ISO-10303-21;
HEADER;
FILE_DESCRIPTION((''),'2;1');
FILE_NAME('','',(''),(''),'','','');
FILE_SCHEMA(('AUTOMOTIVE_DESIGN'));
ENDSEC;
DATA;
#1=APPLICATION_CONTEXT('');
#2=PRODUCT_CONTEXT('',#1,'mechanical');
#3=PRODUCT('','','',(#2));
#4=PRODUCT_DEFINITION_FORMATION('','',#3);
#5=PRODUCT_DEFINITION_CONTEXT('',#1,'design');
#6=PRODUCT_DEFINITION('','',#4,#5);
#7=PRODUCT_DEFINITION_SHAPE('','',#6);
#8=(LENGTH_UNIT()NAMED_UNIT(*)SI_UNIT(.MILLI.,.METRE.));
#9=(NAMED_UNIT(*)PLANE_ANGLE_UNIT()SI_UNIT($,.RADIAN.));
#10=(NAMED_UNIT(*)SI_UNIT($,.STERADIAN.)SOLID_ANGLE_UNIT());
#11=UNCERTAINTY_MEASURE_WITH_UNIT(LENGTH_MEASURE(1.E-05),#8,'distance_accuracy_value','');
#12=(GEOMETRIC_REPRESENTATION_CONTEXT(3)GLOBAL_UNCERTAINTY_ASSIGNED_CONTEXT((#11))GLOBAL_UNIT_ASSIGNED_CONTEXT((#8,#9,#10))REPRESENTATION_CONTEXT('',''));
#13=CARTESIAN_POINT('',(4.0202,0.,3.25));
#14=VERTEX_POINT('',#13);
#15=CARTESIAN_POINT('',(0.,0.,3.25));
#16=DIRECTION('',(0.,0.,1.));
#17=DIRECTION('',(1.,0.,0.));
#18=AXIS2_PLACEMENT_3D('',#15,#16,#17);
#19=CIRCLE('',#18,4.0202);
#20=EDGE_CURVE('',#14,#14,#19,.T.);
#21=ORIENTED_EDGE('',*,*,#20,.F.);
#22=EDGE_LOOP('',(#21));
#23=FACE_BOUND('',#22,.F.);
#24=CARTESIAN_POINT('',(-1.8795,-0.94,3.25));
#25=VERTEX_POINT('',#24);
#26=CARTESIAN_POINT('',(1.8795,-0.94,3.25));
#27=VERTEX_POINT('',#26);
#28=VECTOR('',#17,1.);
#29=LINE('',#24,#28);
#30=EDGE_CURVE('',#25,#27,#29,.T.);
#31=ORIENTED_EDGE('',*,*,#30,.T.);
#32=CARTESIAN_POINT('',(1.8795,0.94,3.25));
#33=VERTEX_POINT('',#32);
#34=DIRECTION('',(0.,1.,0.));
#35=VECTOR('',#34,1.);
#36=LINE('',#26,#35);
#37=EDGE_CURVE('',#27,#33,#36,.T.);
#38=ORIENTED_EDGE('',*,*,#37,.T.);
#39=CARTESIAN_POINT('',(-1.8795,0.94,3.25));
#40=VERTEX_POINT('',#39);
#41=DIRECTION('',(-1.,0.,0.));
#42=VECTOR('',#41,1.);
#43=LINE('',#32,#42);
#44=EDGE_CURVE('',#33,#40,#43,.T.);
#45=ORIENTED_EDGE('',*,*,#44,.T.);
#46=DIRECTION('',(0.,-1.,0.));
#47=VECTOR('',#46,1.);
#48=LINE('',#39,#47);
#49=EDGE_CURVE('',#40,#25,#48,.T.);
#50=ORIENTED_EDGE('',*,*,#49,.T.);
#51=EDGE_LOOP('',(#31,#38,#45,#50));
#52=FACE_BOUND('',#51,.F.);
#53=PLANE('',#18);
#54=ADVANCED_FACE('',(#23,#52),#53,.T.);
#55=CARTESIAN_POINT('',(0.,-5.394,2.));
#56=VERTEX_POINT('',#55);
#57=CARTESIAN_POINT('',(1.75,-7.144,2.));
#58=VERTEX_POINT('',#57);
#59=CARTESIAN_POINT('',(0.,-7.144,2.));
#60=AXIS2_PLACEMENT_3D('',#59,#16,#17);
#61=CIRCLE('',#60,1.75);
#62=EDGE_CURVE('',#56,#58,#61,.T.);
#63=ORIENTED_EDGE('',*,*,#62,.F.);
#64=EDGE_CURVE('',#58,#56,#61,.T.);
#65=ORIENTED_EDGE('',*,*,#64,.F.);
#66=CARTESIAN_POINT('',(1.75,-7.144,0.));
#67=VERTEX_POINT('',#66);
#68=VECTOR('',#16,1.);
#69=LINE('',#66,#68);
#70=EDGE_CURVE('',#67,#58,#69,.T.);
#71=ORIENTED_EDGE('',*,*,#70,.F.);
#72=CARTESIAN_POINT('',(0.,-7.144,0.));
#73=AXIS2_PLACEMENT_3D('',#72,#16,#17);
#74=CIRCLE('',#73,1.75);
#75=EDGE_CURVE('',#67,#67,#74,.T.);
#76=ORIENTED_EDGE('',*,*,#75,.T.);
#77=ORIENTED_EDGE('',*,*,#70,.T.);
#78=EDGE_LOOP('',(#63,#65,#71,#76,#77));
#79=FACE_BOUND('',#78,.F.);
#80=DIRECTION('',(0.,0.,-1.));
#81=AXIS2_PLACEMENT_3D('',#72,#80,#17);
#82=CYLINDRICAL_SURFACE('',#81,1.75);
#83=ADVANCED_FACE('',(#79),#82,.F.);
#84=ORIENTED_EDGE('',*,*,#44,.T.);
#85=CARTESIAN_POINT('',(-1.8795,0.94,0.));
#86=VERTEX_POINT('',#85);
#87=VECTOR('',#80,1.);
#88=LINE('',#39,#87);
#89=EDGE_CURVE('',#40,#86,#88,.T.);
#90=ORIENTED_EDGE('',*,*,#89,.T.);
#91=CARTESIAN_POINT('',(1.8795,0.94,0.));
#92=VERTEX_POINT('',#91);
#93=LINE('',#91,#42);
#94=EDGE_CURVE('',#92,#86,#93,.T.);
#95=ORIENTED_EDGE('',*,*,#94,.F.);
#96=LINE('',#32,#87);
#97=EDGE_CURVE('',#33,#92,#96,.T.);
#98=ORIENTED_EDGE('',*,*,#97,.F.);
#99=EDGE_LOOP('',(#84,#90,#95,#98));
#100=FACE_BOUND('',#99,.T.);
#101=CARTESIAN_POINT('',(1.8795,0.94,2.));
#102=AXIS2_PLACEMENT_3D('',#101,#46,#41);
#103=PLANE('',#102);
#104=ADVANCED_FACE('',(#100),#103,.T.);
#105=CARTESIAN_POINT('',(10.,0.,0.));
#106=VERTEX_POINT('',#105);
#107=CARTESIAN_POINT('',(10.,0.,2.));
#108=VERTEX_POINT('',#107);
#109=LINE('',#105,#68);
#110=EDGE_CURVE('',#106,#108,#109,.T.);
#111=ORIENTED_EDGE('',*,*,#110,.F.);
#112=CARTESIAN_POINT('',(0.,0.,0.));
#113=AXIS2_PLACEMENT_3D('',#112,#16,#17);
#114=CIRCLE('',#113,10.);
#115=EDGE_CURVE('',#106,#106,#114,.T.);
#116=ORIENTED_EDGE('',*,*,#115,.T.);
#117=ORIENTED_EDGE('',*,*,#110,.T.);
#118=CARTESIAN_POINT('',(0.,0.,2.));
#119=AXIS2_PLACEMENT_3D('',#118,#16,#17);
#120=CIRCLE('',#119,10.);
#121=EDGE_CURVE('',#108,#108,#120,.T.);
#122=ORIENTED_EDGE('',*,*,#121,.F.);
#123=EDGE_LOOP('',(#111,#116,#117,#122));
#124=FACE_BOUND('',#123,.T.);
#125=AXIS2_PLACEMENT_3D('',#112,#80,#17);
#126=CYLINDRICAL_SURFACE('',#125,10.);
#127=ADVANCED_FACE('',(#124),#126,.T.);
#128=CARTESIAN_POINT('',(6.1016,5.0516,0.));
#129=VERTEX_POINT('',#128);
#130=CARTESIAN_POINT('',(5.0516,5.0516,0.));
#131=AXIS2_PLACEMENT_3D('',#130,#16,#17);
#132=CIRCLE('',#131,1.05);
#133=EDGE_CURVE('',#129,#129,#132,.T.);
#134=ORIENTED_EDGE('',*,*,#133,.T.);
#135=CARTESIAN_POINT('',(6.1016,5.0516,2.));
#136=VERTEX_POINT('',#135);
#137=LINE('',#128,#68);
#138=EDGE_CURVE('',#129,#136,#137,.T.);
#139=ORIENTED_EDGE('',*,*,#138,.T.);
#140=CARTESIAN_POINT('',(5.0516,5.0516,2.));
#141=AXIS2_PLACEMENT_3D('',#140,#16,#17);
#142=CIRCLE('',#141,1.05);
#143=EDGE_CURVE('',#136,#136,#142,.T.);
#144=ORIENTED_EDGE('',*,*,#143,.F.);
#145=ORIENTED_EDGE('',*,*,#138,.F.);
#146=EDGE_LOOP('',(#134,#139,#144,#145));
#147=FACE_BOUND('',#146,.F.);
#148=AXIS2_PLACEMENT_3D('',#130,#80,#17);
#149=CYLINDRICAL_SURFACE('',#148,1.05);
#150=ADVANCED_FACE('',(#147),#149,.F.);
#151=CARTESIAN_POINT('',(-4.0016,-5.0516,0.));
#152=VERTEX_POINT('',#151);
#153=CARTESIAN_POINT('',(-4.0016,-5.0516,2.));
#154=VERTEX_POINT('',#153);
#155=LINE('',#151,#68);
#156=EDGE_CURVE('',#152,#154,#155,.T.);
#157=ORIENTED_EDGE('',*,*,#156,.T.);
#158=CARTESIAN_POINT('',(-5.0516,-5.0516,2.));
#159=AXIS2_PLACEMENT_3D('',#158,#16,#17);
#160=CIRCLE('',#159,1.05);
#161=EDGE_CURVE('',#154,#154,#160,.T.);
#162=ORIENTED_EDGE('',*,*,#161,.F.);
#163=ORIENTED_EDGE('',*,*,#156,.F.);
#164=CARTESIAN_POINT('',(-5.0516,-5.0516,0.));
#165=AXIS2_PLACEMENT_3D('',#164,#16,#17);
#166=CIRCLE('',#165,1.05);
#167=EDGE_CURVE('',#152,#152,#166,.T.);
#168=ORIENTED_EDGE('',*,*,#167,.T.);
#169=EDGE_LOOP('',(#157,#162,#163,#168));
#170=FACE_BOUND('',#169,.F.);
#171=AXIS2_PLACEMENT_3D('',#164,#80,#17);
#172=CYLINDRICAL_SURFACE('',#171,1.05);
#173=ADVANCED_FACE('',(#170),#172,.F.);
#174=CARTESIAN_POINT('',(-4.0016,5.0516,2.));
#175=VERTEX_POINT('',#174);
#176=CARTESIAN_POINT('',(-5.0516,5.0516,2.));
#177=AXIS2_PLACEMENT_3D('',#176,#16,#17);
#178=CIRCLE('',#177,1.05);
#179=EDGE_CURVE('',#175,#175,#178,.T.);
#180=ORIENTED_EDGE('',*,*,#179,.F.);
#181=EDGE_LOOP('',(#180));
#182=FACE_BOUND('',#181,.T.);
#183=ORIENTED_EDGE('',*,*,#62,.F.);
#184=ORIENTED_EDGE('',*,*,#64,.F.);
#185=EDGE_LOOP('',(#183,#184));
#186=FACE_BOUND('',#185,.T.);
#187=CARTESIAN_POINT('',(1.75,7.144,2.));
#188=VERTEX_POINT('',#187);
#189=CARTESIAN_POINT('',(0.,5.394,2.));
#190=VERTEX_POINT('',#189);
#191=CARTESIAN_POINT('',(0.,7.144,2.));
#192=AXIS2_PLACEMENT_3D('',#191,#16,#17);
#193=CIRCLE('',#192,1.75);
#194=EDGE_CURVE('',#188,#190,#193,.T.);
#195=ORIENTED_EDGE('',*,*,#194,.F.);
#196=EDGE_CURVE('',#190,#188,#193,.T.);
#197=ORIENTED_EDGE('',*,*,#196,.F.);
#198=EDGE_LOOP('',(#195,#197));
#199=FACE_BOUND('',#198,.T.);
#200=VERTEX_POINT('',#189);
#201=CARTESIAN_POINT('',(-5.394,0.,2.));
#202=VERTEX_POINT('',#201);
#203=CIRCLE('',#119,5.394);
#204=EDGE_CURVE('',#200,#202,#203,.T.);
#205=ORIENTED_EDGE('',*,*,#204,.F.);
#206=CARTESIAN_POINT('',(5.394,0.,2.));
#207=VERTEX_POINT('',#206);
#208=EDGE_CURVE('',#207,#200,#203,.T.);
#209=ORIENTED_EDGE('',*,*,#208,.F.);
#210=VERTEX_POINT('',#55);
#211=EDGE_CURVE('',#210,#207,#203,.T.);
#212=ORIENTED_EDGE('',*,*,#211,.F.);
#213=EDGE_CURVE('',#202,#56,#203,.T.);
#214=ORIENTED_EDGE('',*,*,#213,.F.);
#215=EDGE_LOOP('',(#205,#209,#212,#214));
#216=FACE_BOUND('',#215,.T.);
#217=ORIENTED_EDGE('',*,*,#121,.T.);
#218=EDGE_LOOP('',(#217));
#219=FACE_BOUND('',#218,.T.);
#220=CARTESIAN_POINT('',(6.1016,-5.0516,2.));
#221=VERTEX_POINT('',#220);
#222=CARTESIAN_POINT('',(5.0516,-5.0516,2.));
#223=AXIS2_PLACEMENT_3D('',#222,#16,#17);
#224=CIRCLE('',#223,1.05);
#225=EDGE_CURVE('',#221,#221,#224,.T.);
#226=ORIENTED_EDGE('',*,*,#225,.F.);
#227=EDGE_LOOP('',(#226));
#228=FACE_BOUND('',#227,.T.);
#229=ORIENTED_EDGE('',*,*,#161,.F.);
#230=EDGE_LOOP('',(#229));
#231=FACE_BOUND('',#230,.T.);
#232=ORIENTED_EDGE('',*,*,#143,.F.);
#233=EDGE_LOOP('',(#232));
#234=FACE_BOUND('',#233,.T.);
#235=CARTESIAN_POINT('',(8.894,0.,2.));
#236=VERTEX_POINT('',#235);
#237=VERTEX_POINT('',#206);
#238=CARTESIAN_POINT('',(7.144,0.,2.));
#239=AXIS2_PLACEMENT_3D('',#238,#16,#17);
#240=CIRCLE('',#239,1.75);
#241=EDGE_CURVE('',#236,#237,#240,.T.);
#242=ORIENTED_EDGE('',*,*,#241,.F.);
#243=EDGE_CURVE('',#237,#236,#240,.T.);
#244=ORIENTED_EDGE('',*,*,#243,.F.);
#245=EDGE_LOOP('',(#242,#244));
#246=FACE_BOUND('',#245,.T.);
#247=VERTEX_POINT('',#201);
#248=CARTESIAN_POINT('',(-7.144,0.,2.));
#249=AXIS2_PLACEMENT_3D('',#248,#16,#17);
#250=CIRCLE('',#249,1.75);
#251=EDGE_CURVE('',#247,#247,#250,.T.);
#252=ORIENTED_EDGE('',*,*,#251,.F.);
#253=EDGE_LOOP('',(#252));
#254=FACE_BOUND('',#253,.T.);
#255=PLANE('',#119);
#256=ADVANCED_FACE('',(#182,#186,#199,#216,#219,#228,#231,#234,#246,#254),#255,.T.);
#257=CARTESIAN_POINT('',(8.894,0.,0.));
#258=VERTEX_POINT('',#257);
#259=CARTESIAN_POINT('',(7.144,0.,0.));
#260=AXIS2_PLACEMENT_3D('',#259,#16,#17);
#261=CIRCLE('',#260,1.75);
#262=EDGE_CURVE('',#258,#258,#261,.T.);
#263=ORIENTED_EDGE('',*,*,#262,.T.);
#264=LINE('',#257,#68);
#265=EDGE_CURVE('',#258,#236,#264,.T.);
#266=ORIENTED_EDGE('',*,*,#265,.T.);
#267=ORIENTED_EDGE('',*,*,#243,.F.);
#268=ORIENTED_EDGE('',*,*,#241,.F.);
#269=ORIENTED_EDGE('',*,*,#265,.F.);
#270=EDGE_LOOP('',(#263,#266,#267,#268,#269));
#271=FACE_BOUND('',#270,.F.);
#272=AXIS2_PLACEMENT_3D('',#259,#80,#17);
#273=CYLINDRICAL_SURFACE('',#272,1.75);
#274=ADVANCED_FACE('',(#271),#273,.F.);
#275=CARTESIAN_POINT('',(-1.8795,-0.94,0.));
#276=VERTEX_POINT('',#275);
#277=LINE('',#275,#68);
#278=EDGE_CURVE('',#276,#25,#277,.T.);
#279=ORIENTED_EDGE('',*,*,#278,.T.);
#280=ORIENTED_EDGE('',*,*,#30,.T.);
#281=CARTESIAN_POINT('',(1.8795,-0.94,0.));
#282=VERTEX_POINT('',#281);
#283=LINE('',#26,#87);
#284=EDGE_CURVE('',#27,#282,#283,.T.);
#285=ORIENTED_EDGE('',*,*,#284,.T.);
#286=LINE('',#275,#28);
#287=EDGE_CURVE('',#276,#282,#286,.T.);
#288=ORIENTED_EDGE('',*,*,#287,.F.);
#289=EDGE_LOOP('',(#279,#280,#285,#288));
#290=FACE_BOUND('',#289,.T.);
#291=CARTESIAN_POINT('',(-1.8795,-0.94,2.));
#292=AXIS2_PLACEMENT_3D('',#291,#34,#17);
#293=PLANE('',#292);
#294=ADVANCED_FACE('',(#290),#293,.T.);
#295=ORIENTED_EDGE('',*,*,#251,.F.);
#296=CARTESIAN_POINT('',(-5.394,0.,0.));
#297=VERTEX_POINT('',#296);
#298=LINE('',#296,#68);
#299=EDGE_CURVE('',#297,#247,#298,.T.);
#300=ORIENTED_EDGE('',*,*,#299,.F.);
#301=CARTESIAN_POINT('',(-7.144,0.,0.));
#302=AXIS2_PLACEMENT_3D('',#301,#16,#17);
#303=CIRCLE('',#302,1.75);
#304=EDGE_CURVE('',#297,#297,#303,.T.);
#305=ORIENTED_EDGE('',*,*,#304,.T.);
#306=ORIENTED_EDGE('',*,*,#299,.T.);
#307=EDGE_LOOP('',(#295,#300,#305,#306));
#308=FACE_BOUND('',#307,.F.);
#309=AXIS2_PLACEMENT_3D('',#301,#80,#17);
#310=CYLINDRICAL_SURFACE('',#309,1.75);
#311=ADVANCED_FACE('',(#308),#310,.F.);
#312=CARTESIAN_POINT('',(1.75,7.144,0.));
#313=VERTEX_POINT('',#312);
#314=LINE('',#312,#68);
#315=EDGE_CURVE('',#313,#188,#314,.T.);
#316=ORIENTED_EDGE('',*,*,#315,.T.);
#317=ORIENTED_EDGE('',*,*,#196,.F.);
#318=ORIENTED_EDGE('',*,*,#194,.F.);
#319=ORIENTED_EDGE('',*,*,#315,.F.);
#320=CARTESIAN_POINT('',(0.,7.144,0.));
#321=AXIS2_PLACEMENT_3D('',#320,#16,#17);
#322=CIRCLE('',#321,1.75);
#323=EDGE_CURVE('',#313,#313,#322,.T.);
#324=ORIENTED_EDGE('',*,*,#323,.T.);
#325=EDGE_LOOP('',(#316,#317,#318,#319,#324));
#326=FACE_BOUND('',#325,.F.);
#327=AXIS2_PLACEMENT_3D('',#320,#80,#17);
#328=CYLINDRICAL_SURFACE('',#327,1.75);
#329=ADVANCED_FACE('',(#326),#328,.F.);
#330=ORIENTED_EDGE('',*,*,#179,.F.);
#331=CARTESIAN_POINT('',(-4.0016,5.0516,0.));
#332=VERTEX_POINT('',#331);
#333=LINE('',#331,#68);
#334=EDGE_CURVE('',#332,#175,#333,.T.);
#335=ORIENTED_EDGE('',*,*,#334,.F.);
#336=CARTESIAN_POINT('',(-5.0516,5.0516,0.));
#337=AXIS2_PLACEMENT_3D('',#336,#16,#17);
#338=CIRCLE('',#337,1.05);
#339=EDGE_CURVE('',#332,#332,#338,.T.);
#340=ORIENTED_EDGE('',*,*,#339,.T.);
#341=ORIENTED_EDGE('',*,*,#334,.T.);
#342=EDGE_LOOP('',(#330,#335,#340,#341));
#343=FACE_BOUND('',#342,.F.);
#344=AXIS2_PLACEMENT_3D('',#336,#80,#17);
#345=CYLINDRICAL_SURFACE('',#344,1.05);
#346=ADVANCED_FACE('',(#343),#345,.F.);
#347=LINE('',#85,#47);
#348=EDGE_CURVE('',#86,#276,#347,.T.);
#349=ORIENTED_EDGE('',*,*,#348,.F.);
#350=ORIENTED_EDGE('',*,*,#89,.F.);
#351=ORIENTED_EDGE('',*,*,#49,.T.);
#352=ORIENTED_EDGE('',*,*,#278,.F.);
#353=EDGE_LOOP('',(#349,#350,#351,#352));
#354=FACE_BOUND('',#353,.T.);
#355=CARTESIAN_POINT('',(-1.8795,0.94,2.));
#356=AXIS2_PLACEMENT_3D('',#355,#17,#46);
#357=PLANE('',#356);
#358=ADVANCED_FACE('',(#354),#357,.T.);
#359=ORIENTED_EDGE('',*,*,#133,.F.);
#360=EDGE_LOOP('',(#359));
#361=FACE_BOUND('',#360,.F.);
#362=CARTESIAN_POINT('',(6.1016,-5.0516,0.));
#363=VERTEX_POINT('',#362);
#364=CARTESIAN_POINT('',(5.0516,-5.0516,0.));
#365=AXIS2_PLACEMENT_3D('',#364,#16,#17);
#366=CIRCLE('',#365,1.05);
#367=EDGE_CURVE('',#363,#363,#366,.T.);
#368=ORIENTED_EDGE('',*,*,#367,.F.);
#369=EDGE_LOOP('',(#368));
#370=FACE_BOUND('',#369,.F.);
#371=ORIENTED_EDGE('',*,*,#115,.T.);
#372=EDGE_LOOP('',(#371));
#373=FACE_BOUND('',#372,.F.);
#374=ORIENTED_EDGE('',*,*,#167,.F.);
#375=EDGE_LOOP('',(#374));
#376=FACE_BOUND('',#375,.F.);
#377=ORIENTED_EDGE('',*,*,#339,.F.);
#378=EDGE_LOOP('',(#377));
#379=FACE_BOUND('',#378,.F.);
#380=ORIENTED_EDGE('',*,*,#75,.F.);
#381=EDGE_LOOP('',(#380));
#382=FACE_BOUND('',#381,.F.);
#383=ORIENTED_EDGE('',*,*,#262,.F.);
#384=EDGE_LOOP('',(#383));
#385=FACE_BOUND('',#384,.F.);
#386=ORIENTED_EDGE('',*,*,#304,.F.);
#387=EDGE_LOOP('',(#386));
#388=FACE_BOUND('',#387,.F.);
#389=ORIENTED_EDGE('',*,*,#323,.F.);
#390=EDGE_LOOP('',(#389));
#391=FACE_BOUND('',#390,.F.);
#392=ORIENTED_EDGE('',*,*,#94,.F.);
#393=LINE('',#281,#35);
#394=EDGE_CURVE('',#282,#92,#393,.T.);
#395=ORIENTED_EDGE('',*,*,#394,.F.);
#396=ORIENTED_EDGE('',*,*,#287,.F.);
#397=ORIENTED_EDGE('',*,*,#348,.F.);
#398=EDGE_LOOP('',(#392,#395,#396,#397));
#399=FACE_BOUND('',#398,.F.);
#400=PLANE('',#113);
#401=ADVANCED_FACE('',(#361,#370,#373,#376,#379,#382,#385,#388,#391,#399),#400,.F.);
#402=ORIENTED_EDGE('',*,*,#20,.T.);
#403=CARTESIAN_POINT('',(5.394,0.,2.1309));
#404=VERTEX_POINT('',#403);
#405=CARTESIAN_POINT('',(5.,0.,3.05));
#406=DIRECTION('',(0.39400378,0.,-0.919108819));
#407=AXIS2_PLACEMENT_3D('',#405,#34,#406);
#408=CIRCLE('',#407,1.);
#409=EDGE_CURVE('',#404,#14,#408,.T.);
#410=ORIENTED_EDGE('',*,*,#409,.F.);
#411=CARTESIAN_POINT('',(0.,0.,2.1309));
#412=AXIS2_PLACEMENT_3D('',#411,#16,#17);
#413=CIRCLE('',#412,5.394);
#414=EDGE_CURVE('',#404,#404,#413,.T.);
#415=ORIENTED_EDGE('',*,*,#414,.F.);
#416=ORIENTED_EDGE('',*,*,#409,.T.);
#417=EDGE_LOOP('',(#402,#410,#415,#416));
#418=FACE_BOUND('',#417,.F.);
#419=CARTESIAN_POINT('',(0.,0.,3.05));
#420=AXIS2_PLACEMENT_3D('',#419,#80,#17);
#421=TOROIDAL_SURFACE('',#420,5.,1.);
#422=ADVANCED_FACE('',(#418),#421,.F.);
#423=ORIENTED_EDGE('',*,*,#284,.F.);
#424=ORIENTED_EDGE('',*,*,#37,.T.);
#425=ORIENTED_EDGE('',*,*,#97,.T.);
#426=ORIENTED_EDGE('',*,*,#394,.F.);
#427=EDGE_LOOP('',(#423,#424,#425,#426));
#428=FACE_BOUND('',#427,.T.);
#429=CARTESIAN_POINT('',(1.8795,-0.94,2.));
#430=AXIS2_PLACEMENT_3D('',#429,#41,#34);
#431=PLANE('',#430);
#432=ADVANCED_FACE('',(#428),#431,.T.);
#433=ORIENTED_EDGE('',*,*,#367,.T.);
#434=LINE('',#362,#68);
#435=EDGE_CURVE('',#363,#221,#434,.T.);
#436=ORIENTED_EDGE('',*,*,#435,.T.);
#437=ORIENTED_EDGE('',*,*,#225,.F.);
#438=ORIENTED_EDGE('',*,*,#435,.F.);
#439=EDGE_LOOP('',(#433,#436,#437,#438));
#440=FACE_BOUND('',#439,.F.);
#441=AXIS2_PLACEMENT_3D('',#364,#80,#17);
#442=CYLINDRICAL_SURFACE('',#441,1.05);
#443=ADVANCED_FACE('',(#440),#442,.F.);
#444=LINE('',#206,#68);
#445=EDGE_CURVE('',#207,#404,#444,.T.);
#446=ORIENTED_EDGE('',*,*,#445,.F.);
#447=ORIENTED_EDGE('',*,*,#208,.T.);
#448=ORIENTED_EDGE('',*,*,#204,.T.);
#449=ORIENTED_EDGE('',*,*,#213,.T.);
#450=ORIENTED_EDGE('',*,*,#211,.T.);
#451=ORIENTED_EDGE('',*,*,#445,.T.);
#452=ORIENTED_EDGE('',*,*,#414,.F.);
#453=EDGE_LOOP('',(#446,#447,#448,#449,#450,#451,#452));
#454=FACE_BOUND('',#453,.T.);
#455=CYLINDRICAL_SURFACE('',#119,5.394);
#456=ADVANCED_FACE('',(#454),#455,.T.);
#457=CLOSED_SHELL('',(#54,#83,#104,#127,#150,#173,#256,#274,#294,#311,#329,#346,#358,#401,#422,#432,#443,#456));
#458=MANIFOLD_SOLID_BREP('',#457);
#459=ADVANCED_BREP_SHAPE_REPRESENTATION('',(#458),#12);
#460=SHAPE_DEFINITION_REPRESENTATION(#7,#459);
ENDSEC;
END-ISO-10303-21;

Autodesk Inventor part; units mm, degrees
ref_plane "YZ Plane" through (0, 0, 0) normal (1, 0, 0) x (0, 1, 0)
ref_plane "XZ Plane" through (0, 0, 0) normal (0, 1, 0) x (-1, 0, 0)
ref_plane "XY Plane" through (0, 0, 0) normal (0, 0, 1) x (1, 0, 0)
sketch "Endflansch" plane through (0, 0, 0) normal (0, 0, 1) x (1, 0, 0)
  circle A0 centre (0, 0) radius 10
  line L0 (0, 14) -> (0, -14) construction
  line L1 (-14, 0) -> (14, 0) construction
  line L2 (-1.8795, -0.94) -> (1.8795, -0.94)
  line L3 (1.8795, -0.94) -> (1.8795, 0.94)
  line L4 (1.8795, 0.94) -> (-1.8795, 0.94)
  line L5 (-1.8795, 0.94) -> (-1.8795, -0.94)
  line L6 (-1.8795, -0.94) -> (1.8795, 0.94) construction
  line L7 (1.8795, -0.94) -> (-1.8795, 0.94) construction
  circle A1 centre (0, 7.144) radius 1.75
  line L8 (0, 0) -> (9.8265, 9.8265) construction
  circle A2 centre (5.0516, 5.0516) radius 1.05
  circle A3 centre (0, 0) radius 7.144 construction
  circle A4 centre (0, 0) radius 3.865
  circle A5 centre (-7.144, 0) radius 1.75
  circle A6 centre (-5.0516, 5.0516) radius 1.05
  circle A7 centre (0, -7.144) radius 1.75
  circle A8 centre (-5.0516, -5.0516) radius 1.05
  circle A9 centre (7.144, 0) radius 1.75
  circle A10 centre (5.0516, -5.0516) radius 1.05
  dimension "d1" = 20
  dimension "d3" = 1.88
  dimension "d4" = 3.759
  dimension "d5" = 90
  dimension "d7" = 3.5
  dimension "d8" = 45
  dimension "d9" = 2.1
  dimension "d10" = 7.144
  dimension "d14" = 360
  dimension "d20" = 7.73
extrude "Extrusion1" add sketch "Endflansch" along normal blind 2 contours A0 | A4
extrude "Extrusion2" add sketch "Endflansch" along normal blind 1.25 from surface at 2 contours A4
sketch "Skizze2" plane through (0, 0, 0) normal (0, 1, 0) x (-1, 0, 0)
  line L0 (3.865, 3.25) -> (3.865, 2) projected
  line L1 (3.865, 2) -> (5.394, 2) projected
  line L2 (5.394, 2) -> (5.394, 0) projected
  line L3 (5.394, 0) -> (1.8795, 0) projected
  line L4 (1.8795, 0) -> (1.8795, 3.25) projected
  line L5 (1.8795, 3.25) -> (3.865, 3.25) projected
  line L6 (-1.8795, 3.25) -> (-1.8795, 0) projected
  line L7 (-1.8795, 0) -> (-5.394, 0) projected
  line L8 (-5.394, 0) -> (-5.394, 2) projected
  line L9 (-5.394, 2) -> (-3.865, 2) projected
  line L10 (-3.865, 2) -> (-3.865, 3.25) projected
  line L11 (-3.865, 3.25) -> (-1.8795, 3.25) projected
  line L12 (10, 0) -> (8.894, 0) projected
  line L13 (8.894, 0) -> (8.894, 2) projected
  line L14 (8.894, 2) -> (10, 2) projected
  line L15 (10, 2) -> (10, 0) projected
  line L16 (-8.894, 0) -> (-10, 0) projected
  line L17 (-10, 0) -> (-10, 2) projected
  line L18 (-10, 2) -> (-8.894, 2) projected
  line L19 (-8.894, 2) -> (-8.894, 0) projected
  line L20 (0, -0.96) -> (0, 5.76) construction
  circle A0 centre (-5, 3.05) radius 1
  line L21 (-3.865, 3.25) -> (-4.0202, 3.25)
  line L22 (-3.865, 2) -> (-3.865, 3.25) construction
  line L23 (-8.894, 2) -> (-5.394, 2) construction
  line L24 (-5.394, 2) -> (-5.394, 2.1309)
  point P0 (0, 0)
  dimension "d21" = 2
  dimension "d22" = 5
  dimension "d28" = 0.2
revolve "Umdrehung1" add sketch "Skizze2" angle 360 about axis through (0, 0, -10) along (0, 0, 1) contours L10 L9 L24 A0 L21
extrude "Extrusion3" [suppressed]
equation "\"d3\" = Hohlleiter_b"
equation "\"d4\" = Hohlleiter_h"
equation "\"d7\" = Bohrung_IHF_Schraube"
equation "\"d9\" = Bohrung_IHF_Passstift"
equation "\"d20\" = Hohlleiter_Erhebung_d"
equation "\"Hohlleiter_h\" = 3.759"
equation "\"Hohlleiter_b\" = 1.88"
equation "\"Hohlleiter_Orientation\" = 0"
equation "\"Bohrung_IHF_Schraube\" = 3.5"
equation "\"Bohrung_IHF_Passstift\" = 2.1"
equation "\"Hohlleiter_Erhebung_d\" = 7.73"
properties part number "Hohlleiter-EndflanschV4"
